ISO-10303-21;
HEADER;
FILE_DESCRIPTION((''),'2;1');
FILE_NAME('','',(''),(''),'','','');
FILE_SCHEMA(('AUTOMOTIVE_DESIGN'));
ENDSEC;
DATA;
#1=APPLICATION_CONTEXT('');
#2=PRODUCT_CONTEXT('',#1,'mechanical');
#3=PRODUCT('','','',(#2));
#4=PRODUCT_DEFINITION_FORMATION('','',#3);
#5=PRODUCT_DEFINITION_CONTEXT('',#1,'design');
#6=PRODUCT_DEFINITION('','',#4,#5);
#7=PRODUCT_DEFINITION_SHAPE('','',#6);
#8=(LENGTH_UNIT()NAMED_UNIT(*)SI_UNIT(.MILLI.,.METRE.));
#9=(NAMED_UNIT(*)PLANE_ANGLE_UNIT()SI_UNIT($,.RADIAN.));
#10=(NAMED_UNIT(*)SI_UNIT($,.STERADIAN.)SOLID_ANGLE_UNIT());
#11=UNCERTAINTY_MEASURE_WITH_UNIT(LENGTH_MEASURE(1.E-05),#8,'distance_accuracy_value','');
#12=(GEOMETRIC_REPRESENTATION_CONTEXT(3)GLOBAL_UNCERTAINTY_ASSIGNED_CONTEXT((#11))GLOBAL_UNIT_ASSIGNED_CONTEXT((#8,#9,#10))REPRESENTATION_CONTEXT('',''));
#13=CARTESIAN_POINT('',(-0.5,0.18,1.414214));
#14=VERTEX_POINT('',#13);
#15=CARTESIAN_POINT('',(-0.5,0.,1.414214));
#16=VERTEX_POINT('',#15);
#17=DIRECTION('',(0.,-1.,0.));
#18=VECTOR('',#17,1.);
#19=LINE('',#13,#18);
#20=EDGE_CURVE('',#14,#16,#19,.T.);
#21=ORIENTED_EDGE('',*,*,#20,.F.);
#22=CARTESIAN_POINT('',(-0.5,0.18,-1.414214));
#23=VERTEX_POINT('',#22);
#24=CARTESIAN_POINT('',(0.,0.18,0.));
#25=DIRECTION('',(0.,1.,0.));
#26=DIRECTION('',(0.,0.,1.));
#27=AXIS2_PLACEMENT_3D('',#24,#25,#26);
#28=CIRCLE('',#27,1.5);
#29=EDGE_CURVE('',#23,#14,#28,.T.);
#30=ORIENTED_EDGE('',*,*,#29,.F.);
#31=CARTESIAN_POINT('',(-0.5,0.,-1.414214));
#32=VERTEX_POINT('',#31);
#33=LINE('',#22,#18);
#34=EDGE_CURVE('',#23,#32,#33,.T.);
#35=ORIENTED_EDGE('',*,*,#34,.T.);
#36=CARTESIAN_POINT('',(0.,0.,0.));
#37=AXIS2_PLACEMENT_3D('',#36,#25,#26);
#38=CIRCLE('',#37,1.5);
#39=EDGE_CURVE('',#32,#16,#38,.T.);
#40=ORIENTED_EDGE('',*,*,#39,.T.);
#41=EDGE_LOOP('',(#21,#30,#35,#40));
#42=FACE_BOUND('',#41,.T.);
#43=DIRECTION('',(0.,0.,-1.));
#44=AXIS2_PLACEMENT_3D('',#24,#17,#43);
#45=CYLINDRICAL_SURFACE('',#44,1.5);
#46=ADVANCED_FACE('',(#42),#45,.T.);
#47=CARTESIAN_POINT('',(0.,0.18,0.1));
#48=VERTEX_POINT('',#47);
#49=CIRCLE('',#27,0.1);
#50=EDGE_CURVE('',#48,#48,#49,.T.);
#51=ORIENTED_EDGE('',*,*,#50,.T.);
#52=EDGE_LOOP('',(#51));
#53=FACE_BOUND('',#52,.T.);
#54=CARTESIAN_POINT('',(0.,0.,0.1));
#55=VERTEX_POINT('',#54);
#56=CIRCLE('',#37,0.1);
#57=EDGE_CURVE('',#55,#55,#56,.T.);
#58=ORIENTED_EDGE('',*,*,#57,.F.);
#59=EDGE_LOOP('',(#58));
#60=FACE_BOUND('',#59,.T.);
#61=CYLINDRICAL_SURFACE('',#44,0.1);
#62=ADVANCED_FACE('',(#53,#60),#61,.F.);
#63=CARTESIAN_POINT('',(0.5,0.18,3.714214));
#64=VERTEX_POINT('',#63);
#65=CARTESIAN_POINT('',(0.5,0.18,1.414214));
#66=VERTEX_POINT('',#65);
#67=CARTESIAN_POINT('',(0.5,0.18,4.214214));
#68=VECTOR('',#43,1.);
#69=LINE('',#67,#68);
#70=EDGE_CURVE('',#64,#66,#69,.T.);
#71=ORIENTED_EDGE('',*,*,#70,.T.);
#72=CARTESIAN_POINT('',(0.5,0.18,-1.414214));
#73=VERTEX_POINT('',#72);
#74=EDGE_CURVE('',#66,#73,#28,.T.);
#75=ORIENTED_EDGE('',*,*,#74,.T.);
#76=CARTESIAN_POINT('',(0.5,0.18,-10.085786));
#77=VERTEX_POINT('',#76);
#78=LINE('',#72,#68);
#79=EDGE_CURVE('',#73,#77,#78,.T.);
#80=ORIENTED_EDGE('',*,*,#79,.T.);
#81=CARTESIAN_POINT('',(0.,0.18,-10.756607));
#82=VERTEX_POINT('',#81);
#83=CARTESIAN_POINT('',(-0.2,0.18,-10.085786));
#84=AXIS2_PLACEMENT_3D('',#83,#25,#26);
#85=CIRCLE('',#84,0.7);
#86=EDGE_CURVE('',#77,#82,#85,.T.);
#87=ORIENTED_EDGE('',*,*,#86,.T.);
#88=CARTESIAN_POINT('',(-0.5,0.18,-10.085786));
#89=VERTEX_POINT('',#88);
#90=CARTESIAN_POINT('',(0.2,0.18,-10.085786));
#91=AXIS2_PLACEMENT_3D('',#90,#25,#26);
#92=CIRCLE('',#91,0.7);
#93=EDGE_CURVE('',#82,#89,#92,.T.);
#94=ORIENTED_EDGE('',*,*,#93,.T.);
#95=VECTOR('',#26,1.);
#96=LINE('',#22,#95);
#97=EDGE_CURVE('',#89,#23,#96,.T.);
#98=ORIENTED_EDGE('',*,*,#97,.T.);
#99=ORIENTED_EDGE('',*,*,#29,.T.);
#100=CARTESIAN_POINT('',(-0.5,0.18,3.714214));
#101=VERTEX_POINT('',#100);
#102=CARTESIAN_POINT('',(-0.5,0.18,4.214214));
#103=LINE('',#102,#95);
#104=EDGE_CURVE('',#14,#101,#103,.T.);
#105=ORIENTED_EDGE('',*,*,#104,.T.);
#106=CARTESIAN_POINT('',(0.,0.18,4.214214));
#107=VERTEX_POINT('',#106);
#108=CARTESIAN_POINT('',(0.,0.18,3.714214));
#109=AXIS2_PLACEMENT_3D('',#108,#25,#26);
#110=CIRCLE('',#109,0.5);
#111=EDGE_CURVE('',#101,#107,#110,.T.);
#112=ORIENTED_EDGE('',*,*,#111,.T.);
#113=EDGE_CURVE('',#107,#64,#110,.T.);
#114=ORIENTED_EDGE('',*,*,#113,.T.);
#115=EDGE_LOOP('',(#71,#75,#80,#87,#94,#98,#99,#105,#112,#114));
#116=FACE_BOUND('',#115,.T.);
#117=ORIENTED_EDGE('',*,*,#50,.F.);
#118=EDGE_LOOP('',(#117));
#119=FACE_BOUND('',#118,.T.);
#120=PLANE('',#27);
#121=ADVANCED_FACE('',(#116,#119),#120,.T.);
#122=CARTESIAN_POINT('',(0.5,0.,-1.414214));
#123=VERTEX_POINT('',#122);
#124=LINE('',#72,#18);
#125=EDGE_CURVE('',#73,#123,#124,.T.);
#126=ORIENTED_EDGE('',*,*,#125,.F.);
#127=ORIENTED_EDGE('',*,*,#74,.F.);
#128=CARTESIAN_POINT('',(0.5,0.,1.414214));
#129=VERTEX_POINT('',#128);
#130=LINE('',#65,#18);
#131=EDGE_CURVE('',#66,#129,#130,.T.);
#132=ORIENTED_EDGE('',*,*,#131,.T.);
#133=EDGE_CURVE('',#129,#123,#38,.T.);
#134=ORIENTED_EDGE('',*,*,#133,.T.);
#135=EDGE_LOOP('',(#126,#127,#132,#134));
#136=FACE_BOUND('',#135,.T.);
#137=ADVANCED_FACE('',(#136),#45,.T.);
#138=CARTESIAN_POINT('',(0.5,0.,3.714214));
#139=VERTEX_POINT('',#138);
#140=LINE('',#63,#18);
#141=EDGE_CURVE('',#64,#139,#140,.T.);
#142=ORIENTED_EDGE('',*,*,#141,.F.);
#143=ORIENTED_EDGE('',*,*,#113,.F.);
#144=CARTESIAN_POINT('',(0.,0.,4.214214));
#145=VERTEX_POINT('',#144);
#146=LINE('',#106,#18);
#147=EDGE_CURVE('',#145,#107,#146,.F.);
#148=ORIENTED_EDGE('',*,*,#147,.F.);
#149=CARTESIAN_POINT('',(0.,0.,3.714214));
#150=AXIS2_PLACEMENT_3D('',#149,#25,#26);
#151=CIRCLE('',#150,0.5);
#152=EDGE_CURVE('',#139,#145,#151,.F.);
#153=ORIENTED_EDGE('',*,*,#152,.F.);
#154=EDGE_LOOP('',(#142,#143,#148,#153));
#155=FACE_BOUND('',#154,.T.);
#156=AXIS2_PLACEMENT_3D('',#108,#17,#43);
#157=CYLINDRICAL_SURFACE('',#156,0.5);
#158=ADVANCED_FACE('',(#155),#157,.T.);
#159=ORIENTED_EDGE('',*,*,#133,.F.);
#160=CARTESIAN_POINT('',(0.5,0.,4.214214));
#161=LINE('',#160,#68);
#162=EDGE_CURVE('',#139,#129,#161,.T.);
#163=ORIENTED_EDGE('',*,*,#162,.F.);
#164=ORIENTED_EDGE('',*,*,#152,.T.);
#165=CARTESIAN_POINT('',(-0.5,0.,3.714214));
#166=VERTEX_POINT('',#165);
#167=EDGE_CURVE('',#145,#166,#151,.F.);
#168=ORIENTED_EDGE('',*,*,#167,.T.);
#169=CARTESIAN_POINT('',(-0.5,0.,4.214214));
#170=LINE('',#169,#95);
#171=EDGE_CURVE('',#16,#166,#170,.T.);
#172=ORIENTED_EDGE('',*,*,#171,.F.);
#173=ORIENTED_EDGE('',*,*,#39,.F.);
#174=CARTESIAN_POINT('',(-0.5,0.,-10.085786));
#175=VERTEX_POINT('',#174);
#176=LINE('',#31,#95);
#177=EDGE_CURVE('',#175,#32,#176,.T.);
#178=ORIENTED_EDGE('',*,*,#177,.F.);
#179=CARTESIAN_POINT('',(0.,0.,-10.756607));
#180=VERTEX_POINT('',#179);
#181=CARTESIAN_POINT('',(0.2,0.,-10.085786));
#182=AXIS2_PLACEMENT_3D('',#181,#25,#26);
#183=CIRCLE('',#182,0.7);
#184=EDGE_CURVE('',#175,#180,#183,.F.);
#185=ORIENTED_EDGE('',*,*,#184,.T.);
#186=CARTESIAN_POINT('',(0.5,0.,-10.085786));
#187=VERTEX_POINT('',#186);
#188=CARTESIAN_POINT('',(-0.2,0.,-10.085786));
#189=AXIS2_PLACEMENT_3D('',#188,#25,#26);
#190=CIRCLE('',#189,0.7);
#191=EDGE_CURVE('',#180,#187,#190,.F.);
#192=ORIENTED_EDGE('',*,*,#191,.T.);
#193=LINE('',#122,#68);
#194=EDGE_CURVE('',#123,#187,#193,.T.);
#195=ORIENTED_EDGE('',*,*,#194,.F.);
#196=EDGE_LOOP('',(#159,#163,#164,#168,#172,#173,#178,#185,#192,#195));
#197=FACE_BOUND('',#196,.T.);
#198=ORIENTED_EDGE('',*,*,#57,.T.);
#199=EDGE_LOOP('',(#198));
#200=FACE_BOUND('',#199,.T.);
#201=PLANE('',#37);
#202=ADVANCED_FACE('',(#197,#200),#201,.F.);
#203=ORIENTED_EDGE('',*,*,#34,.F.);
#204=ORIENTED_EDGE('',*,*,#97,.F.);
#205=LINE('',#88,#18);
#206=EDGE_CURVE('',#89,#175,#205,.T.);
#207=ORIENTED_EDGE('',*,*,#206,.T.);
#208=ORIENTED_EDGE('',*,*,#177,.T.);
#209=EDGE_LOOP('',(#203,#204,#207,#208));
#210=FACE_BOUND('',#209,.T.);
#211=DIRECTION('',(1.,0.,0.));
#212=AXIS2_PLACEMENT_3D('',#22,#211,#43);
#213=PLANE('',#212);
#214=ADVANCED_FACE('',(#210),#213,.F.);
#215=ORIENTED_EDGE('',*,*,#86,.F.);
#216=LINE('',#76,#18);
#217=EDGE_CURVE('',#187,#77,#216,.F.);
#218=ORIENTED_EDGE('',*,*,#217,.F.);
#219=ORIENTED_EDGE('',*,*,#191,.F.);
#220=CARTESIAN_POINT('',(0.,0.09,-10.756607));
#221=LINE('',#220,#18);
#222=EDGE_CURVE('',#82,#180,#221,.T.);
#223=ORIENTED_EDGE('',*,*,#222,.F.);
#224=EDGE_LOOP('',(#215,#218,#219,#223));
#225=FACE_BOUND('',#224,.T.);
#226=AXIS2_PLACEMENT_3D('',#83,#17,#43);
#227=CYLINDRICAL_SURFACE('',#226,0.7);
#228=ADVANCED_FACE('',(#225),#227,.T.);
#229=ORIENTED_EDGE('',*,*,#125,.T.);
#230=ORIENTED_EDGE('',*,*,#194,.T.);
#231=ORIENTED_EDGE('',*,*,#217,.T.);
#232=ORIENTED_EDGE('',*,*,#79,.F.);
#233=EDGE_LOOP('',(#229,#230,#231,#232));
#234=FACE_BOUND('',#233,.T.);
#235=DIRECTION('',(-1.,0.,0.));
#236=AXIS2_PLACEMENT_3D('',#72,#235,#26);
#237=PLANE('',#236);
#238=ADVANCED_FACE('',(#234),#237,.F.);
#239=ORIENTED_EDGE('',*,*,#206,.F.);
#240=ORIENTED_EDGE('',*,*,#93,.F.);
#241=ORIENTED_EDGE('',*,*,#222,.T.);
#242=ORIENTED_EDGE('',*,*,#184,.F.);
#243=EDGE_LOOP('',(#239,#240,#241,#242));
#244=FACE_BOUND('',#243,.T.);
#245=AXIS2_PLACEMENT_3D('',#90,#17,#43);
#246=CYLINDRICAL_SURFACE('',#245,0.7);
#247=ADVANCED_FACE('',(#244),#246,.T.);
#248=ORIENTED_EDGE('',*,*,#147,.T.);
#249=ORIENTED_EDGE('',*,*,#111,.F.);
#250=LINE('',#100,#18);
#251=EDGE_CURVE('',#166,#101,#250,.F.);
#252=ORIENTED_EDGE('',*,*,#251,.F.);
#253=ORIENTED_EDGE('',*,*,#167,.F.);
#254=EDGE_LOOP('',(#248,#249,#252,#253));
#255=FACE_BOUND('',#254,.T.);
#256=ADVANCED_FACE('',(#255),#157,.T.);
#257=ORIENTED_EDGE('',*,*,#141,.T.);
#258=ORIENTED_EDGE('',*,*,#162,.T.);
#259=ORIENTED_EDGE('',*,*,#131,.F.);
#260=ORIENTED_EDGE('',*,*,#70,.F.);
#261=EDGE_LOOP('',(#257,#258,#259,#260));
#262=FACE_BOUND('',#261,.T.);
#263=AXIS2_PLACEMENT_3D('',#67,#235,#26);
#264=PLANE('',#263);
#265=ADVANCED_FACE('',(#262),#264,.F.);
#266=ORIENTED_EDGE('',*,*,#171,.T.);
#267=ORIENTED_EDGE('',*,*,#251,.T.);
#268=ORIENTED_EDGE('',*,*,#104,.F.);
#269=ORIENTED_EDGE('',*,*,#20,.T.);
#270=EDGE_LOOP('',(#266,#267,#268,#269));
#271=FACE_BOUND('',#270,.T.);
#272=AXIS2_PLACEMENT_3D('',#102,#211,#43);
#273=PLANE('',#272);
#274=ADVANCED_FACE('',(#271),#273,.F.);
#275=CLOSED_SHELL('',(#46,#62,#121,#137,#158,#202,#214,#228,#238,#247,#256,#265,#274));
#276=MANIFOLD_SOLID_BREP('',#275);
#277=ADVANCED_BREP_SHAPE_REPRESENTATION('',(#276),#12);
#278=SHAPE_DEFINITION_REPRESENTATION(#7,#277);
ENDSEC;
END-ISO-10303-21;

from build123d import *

# Parameters (mm, degrees)
SKETCH1_R           = 0.1
BOSS_EXTRUDE1_DEPTH = 0.18
FILLET1_R           = 0.5
FILLET2_R           = 0.7


# Some blends are built 0.0001 mm under size
with BuildPart() as part:
    # Sketch1 → Boss-Extrude1 (new body)
    with BuildSketch(Plane(origin=(0, 0, 0), x_dir=(1, 0, 0), z_dir=(0, 1, 0))):
        with BuildLine():
            Line((-0.5, -4.214213562), (-0.5, -1.414213562))
            ThreePointArc((-0.5, -1.414213562), (-1.5, 0), (-0.5, 1.414213562))
            Line((-0.5, 1.414213562), (-0.5, 10.785786438))
            Line((-0.5, 10.785786438), (0.5, 10.785786438))
            Line((0.5, 10.785786438), (0.5, 1.414213562))
            ThreePointArc((0.5, 1.414213562), (1.5, 0), (0.5, -1.414213562))
            Line((0.5, -1.414213562), (0.5, -4.214213562))
            Line((0.5, -4.214213562), (-0.5, -4.214213562))
        make_face()
        with Locations(Location((0, 0, 0), (0, 0, 270))):
            Circle(SKETCH1_R, mode=Mode.SUBTRACT)
    extrude(amount=BOSS_EXTRUDE1_DEPTH)

    # Fillet1
    fillet1_edges = [part.edges().sort_by_distance(p)[0] for p in [
        (-0.5, 0.09, 4.214213562),
        (0.5, 0.09, 4.214213562),
    ]]
    fillet(fillet1_edges, radius=FILLET1_R - 0.0001)  # a hair under: the kernel refuses the full size

    # Fillet2
    # the kernel refuses this fillet: 0.7 mm, written as the material it takes off along each edge
    with BuildSketch(Plane(origin=(-0.5, -1.75, -10.785786438), x_dir=(1, 0, 0), z_dir=(0, 1, 0)), Plane(origin=(0.5, -1.75, -10.785786438), x_dir=(0, 0, 1), z_dir=(0, 1, 0))) as fillet2_piece_1:
        with BuildLine():
            CenterArc((FILLET2_R, -FILLET2_R), FILLET2_R, 90, 90)
            Line((0, -FILLET2_R), (0, 0))
            Line((0, 0), (FILLET2_R, 0))
        make_face()
    extrude(amount=3.68, mode=Mode.SUBTRACT)


solid = part.part
